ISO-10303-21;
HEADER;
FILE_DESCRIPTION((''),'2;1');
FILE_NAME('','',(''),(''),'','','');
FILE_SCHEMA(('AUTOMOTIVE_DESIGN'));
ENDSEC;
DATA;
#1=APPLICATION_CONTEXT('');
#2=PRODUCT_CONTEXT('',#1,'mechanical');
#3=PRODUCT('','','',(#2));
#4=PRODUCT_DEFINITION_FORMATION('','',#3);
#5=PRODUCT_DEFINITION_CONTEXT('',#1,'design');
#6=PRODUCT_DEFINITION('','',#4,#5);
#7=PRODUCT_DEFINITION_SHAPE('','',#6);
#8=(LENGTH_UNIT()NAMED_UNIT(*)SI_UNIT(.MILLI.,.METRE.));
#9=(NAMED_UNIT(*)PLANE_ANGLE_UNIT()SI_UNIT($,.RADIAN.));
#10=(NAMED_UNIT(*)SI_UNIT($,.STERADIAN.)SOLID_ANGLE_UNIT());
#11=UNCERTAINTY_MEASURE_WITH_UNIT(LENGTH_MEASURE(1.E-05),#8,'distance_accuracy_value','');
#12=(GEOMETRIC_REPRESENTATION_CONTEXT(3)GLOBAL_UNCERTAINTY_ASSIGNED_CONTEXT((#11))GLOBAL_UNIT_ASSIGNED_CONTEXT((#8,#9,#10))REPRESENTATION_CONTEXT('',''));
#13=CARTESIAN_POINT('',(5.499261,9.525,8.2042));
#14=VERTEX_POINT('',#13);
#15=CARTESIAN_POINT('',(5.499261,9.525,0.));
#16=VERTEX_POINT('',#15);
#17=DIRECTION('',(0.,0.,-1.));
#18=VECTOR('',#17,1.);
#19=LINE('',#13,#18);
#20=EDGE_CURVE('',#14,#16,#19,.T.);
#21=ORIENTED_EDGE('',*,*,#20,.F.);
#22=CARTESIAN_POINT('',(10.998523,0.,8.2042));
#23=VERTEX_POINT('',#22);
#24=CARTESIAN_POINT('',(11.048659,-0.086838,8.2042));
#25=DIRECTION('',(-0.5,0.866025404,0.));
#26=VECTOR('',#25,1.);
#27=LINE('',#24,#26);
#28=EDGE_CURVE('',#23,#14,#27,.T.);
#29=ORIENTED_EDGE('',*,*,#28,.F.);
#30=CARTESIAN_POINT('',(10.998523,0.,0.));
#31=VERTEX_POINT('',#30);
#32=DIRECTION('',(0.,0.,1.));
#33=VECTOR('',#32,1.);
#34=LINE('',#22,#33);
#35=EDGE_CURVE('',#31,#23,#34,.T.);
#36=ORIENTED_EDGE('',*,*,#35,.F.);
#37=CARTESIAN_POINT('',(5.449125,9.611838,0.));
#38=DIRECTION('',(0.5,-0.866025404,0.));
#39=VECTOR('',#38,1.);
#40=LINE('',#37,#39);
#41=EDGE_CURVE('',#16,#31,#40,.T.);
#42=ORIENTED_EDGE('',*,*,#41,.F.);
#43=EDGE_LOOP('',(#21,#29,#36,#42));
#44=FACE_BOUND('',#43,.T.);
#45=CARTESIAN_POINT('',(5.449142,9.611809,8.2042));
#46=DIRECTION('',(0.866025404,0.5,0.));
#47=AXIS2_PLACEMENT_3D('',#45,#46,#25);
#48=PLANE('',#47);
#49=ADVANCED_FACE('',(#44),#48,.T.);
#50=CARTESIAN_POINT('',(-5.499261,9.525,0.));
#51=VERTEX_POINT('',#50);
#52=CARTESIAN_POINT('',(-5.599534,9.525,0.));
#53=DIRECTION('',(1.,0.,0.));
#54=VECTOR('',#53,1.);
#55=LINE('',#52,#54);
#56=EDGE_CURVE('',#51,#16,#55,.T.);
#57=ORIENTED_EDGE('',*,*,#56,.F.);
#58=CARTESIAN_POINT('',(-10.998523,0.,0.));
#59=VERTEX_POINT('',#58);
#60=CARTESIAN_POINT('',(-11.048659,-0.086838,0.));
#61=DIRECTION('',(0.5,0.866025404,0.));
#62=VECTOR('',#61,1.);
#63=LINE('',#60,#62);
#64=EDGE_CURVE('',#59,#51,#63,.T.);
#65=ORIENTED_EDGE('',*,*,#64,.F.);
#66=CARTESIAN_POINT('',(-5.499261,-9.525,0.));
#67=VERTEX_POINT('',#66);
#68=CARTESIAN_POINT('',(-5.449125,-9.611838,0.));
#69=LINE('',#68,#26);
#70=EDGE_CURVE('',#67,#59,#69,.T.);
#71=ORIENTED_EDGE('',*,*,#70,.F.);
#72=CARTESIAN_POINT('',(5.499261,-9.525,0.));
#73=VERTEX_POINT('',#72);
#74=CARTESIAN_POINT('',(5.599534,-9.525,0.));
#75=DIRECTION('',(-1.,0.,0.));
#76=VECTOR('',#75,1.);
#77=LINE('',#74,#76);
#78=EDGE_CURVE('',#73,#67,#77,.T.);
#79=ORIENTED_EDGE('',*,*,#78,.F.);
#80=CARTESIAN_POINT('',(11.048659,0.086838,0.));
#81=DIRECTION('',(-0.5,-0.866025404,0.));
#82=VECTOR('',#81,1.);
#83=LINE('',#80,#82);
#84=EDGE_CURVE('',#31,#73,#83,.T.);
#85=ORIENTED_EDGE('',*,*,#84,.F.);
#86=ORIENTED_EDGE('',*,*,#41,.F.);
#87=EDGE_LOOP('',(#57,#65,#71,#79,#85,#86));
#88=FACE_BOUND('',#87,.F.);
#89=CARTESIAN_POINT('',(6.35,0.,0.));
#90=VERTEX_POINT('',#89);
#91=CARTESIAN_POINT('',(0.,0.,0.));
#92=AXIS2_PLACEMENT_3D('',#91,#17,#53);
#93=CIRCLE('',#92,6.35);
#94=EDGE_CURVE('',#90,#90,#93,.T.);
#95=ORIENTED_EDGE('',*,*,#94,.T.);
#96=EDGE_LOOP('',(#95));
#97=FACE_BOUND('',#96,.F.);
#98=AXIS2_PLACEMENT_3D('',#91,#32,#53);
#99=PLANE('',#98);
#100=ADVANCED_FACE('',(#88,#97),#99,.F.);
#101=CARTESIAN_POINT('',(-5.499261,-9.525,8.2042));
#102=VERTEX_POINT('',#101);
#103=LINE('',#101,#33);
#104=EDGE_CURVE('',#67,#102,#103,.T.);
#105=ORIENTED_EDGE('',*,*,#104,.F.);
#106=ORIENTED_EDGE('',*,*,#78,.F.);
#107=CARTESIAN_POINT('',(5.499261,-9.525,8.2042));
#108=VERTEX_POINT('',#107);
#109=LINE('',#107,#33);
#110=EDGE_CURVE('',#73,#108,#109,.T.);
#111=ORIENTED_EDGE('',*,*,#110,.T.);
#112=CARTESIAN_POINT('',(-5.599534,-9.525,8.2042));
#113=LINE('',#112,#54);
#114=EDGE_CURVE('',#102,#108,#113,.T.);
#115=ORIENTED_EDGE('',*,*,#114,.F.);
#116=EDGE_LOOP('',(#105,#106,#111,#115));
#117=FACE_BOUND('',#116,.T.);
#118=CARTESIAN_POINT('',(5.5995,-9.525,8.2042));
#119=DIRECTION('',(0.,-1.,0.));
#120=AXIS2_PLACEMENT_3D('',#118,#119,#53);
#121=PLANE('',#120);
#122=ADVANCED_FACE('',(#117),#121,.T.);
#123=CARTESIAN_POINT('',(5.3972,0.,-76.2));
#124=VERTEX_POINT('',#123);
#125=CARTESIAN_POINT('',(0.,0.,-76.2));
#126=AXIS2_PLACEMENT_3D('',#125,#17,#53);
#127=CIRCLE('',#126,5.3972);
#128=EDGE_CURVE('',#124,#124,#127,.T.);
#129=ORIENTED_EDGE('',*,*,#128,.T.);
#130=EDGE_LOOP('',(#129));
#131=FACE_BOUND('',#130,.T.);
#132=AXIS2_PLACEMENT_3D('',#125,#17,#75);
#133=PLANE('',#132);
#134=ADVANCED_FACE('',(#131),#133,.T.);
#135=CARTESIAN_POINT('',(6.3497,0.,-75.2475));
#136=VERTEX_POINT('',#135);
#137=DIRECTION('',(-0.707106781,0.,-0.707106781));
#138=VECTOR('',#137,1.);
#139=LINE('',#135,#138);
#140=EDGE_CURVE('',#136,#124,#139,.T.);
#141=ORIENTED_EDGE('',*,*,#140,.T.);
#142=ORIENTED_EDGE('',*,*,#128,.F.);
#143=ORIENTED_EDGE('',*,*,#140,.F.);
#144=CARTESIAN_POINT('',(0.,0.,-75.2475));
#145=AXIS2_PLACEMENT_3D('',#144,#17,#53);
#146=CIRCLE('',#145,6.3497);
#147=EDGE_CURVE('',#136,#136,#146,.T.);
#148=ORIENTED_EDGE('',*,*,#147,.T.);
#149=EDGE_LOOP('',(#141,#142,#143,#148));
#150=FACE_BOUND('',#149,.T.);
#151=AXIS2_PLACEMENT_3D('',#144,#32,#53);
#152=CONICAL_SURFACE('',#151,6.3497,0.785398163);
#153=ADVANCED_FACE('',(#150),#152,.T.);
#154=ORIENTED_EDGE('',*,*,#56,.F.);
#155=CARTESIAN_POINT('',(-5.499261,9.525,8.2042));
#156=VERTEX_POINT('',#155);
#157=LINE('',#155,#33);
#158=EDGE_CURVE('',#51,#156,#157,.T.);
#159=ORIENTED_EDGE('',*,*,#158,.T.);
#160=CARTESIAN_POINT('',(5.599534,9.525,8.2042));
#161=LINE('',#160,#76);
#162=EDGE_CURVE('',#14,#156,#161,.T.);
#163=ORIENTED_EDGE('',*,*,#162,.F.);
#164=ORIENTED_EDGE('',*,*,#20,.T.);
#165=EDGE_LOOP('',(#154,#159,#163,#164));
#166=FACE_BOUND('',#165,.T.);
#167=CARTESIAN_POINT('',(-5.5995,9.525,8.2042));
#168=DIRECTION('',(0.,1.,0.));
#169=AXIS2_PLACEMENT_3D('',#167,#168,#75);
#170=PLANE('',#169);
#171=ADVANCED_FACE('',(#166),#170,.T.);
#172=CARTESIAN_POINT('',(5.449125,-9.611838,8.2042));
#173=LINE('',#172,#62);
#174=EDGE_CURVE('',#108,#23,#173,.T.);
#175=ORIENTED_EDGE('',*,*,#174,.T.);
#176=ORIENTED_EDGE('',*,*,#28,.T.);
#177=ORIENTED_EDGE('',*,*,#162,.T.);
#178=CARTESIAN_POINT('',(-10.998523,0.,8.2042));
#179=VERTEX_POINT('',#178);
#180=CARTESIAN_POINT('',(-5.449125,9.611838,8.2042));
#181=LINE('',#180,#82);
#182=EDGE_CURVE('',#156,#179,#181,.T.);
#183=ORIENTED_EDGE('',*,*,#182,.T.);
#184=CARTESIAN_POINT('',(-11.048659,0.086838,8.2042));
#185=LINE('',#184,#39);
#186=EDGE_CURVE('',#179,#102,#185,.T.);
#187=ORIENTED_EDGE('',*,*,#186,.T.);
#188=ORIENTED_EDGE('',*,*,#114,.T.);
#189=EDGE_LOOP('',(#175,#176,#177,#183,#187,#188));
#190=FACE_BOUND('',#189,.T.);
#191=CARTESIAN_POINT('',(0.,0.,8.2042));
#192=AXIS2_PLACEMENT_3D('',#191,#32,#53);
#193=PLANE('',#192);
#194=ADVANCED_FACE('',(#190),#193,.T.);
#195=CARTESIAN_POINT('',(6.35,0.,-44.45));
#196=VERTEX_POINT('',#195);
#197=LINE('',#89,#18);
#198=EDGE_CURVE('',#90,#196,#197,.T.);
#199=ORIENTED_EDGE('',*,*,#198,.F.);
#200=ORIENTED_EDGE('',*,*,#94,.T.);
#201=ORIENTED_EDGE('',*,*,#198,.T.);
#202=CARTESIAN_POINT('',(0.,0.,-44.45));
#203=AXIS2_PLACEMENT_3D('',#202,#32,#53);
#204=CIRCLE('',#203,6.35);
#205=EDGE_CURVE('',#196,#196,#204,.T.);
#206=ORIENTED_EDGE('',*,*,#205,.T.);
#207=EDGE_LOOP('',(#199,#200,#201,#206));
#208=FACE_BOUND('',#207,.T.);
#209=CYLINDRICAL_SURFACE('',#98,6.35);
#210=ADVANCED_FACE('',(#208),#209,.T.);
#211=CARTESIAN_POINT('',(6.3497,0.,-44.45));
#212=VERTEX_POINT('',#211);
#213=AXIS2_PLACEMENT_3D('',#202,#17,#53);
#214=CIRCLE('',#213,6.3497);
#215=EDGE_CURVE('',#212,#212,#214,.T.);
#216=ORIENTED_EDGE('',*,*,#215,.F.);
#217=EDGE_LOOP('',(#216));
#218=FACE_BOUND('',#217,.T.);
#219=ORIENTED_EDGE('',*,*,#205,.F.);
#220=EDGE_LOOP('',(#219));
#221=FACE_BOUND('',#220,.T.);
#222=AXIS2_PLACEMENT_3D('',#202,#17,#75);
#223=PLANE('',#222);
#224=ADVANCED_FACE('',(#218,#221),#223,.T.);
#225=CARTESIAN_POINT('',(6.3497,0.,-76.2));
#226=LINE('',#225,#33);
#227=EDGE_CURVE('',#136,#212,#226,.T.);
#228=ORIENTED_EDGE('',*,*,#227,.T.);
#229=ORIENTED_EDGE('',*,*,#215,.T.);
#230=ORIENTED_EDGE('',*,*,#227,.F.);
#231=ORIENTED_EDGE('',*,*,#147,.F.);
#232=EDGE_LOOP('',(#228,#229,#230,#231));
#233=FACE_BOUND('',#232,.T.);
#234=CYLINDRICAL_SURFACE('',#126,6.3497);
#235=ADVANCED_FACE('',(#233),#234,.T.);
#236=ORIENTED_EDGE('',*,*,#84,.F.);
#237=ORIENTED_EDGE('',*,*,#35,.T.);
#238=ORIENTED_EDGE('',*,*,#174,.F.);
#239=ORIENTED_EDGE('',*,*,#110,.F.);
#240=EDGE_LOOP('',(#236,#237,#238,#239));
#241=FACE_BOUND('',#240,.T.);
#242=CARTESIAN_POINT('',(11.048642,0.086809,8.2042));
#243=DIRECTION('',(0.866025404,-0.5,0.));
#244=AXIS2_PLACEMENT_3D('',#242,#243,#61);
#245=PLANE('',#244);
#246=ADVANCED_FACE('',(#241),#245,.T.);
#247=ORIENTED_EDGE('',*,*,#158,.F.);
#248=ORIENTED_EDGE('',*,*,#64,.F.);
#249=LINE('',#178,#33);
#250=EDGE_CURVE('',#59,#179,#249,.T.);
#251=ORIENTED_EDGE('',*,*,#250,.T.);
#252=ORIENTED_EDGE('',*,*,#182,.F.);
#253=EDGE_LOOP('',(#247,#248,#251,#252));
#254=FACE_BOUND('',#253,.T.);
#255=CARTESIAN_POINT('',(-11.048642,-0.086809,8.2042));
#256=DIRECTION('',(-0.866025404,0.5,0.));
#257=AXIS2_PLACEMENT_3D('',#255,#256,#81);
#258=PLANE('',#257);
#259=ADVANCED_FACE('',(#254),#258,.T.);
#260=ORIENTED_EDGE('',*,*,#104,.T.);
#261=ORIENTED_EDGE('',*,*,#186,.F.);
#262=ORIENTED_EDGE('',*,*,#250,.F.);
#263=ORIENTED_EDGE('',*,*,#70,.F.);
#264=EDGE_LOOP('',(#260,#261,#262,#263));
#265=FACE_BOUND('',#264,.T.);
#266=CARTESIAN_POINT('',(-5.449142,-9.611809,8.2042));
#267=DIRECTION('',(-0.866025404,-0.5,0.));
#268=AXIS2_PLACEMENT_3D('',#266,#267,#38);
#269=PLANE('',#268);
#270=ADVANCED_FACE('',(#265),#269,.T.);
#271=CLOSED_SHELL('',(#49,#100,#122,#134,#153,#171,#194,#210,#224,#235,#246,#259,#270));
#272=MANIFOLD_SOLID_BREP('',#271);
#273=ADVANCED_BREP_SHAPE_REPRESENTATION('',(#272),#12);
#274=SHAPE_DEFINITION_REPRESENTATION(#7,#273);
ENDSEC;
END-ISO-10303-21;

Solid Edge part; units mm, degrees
sketch "Sketch1" plane through (0, 0, 0) normal (0, 0, 1) x (1, 0, 0)
  circle A0 centre (0, 0) radius 11.049
  dimension "D1" = 22.098
extrude "Protrusion1" add sketch "Sketch1" along normal blind 8.2042
sketch "Sketch2" plane through (0, 0, 0) normal (0, 0, -1) x (1, 0, 0)
  circle A0 centre (0, 0) radius 6.35
extrude "Protrusion2" add sketch "Sketch2" along normal blind 76.2
sketch "Sketch3" plane through (0, 0, -76.2) normal (0, 0, -1) x (1, 0, 0)
  circle A0 centre (0, 0) radius 6.3497
extrude "Cutout1" cut sketch "Sketch3" against normal blind 31.75 flip side to cut
chamfer "Chamfer_1" distance 0.9525 angle 45 1 edges at (-6.3497, 0, -76.2)
sketch "Sketch4" plane through (0, 0, 8.2042) normal (0, 0, 1) x (1, 0, 0)
  line L0 (-5.5995, 9.525) -> (5.5995, 9.525)
  dimension "D1" = 19.05
extrude "Cutout2" cut sketch "Sketch4" against normal up to next material side at (0, 9.575, 8.2042)
pattern_circular "Pattern1" count 6 over 360 about axis through (0, 0, 8.2042) along (0, 0, 1) of "Cutout2"
properties part number "117609"
